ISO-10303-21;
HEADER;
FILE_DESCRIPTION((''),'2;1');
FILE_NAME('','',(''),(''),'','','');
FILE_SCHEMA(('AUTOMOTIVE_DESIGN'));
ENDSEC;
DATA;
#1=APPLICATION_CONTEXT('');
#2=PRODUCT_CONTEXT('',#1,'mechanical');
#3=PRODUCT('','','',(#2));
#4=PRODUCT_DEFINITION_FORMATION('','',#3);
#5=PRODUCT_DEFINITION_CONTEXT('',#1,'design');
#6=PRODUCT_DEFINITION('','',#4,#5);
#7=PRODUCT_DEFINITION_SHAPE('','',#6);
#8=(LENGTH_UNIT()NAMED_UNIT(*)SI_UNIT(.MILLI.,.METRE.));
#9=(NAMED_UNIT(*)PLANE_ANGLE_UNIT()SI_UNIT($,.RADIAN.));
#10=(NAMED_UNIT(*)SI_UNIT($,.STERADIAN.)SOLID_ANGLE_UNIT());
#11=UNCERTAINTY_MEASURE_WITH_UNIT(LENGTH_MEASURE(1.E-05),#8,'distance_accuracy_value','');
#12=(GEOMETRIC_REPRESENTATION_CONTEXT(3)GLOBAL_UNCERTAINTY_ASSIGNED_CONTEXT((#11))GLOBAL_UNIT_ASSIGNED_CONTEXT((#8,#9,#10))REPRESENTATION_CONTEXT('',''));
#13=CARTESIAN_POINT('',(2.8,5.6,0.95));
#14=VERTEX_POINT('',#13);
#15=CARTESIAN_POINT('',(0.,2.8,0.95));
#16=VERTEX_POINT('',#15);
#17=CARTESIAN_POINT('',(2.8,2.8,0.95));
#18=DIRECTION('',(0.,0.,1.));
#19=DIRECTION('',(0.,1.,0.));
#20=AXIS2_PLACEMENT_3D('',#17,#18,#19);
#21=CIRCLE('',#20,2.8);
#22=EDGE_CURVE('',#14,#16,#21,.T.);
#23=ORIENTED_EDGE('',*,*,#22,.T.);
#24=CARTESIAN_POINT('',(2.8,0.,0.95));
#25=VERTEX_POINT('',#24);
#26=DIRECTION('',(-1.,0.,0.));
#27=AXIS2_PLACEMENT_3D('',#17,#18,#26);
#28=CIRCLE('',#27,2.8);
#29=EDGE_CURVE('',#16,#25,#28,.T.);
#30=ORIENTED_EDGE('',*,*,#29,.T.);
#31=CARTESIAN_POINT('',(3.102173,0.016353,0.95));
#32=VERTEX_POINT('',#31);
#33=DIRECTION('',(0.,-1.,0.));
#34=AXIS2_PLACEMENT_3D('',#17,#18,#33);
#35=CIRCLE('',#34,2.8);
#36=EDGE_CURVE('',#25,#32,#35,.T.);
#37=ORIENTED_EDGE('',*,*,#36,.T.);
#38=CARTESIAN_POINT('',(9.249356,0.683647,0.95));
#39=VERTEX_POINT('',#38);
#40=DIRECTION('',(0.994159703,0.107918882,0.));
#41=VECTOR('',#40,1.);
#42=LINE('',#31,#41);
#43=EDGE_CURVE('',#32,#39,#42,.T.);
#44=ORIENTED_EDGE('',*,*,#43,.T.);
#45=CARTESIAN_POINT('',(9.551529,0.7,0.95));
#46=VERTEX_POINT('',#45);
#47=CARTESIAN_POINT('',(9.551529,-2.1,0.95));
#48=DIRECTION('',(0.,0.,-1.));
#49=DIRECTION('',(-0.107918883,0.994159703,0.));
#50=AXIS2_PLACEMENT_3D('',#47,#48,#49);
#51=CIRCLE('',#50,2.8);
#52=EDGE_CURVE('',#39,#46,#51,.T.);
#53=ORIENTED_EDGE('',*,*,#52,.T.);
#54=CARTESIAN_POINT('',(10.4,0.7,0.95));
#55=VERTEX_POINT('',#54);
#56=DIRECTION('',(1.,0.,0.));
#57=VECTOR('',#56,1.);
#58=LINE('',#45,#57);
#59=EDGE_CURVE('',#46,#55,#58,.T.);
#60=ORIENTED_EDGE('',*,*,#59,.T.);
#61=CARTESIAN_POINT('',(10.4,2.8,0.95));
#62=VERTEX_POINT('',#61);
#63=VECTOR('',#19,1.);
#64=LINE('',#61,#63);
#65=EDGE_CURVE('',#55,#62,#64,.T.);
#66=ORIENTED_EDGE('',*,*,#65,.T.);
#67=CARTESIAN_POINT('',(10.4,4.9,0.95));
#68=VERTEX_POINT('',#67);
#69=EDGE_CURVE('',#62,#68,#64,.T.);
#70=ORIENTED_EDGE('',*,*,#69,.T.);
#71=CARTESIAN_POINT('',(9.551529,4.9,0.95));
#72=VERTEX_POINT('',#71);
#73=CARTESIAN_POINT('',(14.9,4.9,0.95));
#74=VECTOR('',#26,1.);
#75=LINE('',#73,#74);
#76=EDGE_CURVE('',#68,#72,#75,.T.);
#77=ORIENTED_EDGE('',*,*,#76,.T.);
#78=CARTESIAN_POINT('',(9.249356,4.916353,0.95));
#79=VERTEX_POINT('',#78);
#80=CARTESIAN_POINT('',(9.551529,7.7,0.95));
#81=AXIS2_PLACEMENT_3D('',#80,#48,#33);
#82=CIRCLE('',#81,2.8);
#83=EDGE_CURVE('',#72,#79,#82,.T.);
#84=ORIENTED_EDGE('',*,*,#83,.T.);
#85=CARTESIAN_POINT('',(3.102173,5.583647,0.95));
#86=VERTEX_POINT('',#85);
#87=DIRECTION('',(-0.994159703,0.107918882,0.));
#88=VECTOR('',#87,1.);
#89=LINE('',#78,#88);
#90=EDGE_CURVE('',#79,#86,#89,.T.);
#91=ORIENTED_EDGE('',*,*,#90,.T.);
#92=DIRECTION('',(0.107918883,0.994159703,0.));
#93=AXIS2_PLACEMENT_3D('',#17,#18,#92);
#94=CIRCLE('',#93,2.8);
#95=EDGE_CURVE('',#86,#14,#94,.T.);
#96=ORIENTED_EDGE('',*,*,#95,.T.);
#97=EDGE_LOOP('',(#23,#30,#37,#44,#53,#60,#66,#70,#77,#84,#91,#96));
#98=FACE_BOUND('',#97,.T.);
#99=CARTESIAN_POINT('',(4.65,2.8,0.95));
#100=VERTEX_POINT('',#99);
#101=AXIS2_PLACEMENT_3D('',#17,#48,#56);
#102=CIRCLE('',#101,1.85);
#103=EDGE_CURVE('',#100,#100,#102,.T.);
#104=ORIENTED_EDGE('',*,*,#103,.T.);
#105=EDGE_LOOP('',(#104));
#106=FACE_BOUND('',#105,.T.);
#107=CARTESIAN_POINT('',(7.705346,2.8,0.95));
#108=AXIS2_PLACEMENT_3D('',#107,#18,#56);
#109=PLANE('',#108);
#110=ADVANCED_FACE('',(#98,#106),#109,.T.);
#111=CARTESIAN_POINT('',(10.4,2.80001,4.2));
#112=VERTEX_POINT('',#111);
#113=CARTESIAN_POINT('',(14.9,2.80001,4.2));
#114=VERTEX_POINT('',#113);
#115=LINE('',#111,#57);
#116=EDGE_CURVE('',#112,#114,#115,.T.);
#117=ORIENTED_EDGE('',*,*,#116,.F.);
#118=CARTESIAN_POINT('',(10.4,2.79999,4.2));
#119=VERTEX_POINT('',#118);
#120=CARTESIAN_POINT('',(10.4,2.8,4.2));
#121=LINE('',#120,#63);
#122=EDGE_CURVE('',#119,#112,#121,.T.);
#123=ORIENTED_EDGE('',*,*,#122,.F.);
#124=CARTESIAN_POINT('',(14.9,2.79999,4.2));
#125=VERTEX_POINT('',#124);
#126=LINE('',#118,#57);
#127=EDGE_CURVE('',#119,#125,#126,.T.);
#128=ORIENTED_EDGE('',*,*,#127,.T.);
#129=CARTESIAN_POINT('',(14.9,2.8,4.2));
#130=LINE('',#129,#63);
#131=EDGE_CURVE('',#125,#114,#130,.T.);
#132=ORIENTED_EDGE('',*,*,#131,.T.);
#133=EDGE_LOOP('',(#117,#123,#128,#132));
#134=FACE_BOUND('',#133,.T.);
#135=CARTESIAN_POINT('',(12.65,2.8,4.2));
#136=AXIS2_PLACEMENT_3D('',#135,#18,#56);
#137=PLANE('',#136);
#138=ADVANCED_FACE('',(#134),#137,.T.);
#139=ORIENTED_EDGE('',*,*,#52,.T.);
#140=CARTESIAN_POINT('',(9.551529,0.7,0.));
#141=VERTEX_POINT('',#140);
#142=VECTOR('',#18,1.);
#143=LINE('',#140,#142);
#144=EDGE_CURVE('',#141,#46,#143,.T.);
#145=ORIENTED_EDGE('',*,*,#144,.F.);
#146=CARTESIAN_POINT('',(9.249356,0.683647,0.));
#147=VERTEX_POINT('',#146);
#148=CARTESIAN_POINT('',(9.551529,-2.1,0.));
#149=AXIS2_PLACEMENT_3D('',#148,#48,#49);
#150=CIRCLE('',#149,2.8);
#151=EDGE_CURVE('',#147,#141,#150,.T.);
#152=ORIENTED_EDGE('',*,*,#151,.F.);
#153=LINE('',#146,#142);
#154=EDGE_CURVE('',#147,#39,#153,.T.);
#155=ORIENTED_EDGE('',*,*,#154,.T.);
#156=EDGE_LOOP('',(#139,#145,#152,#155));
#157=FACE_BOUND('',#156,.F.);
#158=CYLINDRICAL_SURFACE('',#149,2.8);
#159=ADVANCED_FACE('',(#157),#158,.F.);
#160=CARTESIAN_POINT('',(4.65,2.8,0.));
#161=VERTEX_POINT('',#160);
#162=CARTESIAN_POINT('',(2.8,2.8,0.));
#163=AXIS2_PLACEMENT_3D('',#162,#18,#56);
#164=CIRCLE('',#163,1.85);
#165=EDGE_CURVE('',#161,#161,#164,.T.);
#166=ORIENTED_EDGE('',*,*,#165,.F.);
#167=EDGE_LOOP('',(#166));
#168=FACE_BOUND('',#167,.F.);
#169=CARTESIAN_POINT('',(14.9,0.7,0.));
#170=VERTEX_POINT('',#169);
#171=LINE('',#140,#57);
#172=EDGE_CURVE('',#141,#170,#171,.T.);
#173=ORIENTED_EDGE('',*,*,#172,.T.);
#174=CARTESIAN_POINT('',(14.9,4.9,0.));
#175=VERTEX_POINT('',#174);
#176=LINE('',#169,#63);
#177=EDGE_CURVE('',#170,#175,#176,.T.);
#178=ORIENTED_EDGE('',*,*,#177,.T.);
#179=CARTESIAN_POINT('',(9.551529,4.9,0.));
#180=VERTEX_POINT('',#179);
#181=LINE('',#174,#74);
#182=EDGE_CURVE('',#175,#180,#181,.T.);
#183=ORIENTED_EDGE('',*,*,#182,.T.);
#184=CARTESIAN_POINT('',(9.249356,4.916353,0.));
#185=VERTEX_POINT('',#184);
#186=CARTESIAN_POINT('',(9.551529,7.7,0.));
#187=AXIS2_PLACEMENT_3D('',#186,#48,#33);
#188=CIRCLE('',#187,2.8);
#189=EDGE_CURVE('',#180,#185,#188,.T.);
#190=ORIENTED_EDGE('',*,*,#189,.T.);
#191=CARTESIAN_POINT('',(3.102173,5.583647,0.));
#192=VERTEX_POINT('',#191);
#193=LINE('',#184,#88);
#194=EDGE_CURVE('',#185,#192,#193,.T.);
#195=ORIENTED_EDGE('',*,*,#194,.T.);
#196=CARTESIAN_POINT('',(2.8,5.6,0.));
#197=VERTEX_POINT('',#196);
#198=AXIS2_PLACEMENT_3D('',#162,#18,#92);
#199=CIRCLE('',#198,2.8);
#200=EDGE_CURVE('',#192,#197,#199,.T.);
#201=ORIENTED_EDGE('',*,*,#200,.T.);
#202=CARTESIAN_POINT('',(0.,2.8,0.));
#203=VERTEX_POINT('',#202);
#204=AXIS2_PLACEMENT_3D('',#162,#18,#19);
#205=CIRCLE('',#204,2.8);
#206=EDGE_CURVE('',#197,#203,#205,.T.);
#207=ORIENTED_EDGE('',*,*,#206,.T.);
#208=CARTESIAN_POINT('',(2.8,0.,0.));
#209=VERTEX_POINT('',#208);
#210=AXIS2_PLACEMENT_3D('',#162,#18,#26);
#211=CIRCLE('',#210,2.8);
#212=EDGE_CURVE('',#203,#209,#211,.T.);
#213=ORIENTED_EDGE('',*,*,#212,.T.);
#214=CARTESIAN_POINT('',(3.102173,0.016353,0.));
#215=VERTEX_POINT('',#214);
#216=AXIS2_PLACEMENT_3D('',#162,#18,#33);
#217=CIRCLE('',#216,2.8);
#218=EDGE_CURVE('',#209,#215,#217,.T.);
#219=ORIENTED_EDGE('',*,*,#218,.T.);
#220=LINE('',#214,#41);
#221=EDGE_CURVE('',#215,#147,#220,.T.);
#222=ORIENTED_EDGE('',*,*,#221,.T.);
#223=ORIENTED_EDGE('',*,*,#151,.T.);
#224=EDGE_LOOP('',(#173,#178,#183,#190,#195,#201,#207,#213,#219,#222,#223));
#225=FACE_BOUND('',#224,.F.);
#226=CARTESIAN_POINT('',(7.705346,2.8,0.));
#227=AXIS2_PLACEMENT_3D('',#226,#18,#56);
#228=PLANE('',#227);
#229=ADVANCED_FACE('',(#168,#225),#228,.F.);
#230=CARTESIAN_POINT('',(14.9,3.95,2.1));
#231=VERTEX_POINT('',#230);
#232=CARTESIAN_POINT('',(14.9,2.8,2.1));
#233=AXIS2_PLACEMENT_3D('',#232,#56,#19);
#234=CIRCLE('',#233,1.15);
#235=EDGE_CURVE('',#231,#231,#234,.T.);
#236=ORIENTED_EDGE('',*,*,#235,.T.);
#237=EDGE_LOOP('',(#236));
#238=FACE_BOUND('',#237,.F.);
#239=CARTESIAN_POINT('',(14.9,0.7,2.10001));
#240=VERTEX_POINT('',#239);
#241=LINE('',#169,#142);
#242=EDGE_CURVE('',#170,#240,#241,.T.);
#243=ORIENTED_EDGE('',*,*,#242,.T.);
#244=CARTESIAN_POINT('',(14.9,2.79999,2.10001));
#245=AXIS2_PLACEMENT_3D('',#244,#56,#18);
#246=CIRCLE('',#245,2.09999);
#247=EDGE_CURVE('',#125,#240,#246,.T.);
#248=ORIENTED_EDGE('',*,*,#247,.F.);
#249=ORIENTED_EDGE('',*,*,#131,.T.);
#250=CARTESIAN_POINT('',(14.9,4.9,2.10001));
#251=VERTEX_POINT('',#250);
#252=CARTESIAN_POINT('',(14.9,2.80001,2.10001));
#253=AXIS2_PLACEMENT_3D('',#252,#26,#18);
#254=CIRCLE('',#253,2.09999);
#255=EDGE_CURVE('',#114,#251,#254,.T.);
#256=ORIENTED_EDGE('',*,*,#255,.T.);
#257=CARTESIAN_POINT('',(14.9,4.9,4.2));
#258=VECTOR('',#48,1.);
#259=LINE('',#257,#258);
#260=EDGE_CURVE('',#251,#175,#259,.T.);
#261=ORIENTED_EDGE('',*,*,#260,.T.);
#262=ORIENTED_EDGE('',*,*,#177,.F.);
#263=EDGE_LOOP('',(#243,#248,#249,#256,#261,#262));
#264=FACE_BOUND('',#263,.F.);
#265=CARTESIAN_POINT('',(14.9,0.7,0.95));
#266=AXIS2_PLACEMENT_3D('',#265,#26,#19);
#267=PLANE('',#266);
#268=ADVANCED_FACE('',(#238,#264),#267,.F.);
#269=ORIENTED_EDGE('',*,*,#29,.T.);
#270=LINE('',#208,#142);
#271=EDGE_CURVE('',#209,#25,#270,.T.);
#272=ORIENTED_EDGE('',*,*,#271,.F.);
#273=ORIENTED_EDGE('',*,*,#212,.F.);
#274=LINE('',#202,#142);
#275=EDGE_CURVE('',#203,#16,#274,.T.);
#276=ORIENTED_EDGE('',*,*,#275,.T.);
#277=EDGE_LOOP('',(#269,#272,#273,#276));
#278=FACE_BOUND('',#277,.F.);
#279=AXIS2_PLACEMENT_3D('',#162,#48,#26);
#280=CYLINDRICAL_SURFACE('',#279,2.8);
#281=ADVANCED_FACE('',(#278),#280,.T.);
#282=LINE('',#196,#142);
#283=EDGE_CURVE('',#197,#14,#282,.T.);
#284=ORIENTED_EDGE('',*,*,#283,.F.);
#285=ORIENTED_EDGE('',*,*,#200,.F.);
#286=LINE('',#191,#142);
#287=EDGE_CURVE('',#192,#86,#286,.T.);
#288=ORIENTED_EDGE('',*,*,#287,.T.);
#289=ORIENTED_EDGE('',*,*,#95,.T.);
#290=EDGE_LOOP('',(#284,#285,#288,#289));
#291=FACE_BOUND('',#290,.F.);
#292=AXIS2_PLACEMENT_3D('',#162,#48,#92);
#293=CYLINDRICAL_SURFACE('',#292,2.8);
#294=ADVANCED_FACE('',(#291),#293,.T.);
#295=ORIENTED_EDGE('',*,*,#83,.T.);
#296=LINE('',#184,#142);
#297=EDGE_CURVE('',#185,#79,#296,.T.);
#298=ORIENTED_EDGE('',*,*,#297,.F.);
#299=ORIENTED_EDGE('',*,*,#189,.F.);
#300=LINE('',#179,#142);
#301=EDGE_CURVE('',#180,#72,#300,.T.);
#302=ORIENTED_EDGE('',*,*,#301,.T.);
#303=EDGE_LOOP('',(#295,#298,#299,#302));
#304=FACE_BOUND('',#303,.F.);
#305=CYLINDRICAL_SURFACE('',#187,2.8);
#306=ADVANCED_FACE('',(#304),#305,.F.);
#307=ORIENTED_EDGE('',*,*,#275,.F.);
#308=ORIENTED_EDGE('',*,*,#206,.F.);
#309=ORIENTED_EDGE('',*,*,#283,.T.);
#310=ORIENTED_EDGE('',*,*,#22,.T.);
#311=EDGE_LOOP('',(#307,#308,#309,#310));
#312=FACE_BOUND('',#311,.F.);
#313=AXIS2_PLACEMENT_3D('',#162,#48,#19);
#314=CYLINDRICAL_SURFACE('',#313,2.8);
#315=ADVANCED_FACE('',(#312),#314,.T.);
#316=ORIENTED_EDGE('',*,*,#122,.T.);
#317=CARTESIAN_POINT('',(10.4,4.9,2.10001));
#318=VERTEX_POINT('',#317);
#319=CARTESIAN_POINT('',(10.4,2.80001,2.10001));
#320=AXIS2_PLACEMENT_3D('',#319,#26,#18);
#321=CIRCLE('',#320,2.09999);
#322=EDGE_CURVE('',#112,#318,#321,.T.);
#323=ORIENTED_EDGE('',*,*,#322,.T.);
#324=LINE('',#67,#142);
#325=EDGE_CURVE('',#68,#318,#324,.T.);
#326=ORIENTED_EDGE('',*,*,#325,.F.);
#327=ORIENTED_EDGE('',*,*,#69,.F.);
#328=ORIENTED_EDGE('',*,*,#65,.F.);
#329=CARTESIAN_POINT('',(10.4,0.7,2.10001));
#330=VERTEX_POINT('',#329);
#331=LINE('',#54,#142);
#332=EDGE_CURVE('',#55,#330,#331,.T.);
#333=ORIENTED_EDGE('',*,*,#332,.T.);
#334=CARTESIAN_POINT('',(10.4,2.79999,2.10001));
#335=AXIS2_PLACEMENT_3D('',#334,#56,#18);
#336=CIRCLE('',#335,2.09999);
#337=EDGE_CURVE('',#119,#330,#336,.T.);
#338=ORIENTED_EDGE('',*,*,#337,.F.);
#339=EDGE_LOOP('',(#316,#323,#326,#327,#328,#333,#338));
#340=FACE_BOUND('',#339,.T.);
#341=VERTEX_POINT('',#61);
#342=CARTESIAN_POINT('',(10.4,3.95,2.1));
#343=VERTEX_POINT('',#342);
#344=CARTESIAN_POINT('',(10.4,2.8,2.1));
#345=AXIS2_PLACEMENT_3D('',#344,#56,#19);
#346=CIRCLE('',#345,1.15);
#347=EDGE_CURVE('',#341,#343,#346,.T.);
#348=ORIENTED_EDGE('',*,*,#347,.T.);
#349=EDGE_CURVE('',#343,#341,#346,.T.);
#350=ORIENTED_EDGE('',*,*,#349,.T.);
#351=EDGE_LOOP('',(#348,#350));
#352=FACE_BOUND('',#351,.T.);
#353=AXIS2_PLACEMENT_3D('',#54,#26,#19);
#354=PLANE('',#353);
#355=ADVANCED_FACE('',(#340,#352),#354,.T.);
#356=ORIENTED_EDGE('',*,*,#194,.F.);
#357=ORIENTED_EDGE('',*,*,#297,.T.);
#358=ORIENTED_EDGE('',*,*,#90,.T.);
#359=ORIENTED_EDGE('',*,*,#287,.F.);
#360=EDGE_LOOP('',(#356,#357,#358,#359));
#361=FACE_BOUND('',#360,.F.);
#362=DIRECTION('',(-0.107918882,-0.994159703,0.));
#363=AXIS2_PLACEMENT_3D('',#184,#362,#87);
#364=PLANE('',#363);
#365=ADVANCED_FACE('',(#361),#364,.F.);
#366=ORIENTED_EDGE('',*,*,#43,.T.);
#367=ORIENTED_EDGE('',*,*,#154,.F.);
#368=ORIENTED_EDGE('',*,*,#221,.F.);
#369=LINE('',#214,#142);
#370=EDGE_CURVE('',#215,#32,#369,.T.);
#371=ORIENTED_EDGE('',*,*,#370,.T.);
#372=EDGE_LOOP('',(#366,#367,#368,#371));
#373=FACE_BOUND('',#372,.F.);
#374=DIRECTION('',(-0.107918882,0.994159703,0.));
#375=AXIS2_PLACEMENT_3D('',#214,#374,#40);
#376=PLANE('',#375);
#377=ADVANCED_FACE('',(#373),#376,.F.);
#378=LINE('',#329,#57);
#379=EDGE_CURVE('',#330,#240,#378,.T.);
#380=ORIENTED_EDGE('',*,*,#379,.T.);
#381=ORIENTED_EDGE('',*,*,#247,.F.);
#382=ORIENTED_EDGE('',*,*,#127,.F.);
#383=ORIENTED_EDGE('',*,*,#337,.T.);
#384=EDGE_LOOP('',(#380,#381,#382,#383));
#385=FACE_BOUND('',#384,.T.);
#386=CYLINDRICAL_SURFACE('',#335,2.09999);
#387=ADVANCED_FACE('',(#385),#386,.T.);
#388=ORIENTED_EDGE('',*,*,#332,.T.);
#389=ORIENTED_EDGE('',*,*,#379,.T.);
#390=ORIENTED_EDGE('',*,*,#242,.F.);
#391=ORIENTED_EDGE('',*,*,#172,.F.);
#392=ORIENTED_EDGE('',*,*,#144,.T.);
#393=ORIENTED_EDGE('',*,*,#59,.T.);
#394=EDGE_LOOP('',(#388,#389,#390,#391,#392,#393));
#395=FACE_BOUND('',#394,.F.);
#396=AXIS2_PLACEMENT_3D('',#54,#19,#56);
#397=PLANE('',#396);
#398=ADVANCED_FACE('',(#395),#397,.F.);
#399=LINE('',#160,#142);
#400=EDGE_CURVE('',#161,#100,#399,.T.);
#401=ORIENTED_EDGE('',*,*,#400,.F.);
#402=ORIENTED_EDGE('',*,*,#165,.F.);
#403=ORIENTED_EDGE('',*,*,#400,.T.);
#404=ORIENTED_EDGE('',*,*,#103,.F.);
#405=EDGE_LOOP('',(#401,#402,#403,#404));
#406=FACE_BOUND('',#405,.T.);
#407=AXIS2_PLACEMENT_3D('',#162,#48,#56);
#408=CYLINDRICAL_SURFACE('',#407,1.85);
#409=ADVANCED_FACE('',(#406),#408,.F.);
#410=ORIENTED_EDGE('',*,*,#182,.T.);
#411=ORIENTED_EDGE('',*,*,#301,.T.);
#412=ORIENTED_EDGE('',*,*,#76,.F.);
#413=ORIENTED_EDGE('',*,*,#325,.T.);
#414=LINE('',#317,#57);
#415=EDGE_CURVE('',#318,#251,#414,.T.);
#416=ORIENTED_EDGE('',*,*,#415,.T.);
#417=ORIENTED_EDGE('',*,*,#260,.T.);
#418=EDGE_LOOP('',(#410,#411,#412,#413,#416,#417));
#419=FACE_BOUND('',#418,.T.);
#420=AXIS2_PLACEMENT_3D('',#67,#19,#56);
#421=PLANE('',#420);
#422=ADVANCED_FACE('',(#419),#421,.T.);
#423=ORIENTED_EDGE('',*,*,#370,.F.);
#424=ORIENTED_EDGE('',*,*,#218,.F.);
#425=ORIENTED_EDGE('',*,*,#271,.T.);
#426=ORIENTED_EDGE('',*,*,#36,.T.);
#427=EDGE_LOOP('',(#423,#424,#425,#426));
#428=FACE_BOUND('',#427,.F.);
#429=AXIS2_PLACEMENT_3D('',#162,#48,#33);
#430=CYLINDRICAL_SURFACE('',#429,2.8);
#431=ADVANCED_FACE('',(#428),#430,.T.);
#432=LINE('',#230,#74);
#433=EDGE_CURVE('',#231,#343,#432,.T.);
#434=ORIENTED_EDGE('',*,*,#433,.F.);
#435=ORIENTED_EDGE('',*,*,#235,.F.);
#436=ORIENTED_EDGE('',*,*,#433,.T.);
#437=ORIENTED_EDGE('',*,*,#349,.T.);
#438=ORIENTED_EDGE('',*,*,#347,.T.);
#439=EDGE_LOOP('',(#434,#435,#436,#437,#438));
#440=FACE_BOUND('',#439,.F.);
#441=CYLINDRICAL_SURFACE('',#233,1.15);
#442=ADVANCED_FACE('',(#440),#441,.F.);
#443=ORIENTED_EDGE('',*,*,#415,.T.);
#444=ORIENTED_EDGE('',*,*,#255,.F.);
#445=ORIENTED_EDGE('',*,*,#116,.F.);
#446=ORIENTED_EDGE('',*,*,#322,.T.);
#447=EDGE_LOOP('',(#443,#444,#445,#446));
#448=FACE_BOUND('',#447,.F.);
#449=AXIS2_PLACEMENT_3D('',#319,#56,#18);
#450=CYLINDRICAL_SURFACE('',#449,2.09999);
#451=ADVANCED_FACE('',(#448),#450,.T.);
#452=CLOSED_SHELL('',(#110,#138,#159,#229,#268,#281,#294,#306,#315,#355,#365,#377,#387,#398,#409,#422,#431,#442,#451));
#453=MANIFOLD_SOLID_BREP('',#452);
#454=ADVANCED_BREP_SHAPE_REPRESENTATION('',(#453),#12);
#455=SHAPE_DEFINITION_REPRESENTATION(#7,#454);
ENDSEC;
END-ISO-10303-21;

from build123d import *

# Parameters (mm, degrees)
F0_R     = 1.85
F1_DEPTH = 0.95
F2_W     = 4.5
F2_H     = 4.2
F3_DEPTH = 3.25
F4_R     = 2.09999
F5_R     = 1.15
F6_DEPTH = 25


# Not quite as in the source:
# - a fillet or chamfer is up to 0.001 mm smaller than in the source, because OpenCascade refuses the exact size


with BuildPart() as f1:
    # F0 (on Top) → F1 (new body)
    with BuildSketch(Plane.XY):
        with BuildLine():
            Line((9.5515289224, 0.7), (14.9, 0.7))
            Line((14.9, 0.7), (14.9, 4.9))
            Line((14.9, 4.9), (10.4, 4.9))
            Line((10.4, 4.9), (9.5515289224, 4.9))
            ThreePointArc((9.5515289224, 4.9), (9.4002214052, 4.9040911969), (9.2493560516, 4.916352832))
            Line((9.2493560516, 4.916352832), (3.1021728708, 5.583647168))
            ThreePointArc((3.1021728708, 5.583647168), (2.9513075171, 5.5959088031), (2.8, 5.6))
            ThreePointArc((2.8, 5.6), (0.8201010127, 4.7798989873), (0, 2.8))
            ThreePointArc((0, 2.8), (0.8201010127, 0.8201010127), (2.8, 0))
            ThreePointArc((2.8, 0), (2.9513075171, 0.0040911969), (3.1021728708, 0.016352832))
            Line((3.1021728708, 0.016352832), (9.2493560516, 0.683647168))
            ThreePointArc((9.2493560516, 0.683647168), (9.4002214052, 0.6959088031), (9.5515289224, 0.7))
        make_face()
        with Locations((2.8, 2.8)):
            Circle(F0_R, mode=Mode.SUBTRACT)
    extrude(amount=F1_DEPTH)

    # F2 (on face) → F3 (join)
    with BuildSketch(Plane.XY.offset(0.95)):
        with Locations((12.65, 2.8)):
            Rectangle(F2_W, F2_H)
    extrude(amount=F3_DEPTH)

    # F4 (radius 2.1 in the source; OpenCascade refuses exactly that, so slightly less here)
    f4_edges = [f1.edges().sort_by_distance(p)[0] for p in [
        (12.65, 4.9, 4.2),
        (12.65, 0.7, 4.2),
    ]]
    fillet(f4_edges, radius=F4_R)

    # F5 (on face) → F6 (cut)
    with BuildSketch(Plane.YZ.offset(14.9)):
        with Locations((2.8, 2.1)):
            Circle(F5_R)
    extrude(amount=-F6_DEPTH, mode=Mode.SUBTRACT)


solid = f1.part
